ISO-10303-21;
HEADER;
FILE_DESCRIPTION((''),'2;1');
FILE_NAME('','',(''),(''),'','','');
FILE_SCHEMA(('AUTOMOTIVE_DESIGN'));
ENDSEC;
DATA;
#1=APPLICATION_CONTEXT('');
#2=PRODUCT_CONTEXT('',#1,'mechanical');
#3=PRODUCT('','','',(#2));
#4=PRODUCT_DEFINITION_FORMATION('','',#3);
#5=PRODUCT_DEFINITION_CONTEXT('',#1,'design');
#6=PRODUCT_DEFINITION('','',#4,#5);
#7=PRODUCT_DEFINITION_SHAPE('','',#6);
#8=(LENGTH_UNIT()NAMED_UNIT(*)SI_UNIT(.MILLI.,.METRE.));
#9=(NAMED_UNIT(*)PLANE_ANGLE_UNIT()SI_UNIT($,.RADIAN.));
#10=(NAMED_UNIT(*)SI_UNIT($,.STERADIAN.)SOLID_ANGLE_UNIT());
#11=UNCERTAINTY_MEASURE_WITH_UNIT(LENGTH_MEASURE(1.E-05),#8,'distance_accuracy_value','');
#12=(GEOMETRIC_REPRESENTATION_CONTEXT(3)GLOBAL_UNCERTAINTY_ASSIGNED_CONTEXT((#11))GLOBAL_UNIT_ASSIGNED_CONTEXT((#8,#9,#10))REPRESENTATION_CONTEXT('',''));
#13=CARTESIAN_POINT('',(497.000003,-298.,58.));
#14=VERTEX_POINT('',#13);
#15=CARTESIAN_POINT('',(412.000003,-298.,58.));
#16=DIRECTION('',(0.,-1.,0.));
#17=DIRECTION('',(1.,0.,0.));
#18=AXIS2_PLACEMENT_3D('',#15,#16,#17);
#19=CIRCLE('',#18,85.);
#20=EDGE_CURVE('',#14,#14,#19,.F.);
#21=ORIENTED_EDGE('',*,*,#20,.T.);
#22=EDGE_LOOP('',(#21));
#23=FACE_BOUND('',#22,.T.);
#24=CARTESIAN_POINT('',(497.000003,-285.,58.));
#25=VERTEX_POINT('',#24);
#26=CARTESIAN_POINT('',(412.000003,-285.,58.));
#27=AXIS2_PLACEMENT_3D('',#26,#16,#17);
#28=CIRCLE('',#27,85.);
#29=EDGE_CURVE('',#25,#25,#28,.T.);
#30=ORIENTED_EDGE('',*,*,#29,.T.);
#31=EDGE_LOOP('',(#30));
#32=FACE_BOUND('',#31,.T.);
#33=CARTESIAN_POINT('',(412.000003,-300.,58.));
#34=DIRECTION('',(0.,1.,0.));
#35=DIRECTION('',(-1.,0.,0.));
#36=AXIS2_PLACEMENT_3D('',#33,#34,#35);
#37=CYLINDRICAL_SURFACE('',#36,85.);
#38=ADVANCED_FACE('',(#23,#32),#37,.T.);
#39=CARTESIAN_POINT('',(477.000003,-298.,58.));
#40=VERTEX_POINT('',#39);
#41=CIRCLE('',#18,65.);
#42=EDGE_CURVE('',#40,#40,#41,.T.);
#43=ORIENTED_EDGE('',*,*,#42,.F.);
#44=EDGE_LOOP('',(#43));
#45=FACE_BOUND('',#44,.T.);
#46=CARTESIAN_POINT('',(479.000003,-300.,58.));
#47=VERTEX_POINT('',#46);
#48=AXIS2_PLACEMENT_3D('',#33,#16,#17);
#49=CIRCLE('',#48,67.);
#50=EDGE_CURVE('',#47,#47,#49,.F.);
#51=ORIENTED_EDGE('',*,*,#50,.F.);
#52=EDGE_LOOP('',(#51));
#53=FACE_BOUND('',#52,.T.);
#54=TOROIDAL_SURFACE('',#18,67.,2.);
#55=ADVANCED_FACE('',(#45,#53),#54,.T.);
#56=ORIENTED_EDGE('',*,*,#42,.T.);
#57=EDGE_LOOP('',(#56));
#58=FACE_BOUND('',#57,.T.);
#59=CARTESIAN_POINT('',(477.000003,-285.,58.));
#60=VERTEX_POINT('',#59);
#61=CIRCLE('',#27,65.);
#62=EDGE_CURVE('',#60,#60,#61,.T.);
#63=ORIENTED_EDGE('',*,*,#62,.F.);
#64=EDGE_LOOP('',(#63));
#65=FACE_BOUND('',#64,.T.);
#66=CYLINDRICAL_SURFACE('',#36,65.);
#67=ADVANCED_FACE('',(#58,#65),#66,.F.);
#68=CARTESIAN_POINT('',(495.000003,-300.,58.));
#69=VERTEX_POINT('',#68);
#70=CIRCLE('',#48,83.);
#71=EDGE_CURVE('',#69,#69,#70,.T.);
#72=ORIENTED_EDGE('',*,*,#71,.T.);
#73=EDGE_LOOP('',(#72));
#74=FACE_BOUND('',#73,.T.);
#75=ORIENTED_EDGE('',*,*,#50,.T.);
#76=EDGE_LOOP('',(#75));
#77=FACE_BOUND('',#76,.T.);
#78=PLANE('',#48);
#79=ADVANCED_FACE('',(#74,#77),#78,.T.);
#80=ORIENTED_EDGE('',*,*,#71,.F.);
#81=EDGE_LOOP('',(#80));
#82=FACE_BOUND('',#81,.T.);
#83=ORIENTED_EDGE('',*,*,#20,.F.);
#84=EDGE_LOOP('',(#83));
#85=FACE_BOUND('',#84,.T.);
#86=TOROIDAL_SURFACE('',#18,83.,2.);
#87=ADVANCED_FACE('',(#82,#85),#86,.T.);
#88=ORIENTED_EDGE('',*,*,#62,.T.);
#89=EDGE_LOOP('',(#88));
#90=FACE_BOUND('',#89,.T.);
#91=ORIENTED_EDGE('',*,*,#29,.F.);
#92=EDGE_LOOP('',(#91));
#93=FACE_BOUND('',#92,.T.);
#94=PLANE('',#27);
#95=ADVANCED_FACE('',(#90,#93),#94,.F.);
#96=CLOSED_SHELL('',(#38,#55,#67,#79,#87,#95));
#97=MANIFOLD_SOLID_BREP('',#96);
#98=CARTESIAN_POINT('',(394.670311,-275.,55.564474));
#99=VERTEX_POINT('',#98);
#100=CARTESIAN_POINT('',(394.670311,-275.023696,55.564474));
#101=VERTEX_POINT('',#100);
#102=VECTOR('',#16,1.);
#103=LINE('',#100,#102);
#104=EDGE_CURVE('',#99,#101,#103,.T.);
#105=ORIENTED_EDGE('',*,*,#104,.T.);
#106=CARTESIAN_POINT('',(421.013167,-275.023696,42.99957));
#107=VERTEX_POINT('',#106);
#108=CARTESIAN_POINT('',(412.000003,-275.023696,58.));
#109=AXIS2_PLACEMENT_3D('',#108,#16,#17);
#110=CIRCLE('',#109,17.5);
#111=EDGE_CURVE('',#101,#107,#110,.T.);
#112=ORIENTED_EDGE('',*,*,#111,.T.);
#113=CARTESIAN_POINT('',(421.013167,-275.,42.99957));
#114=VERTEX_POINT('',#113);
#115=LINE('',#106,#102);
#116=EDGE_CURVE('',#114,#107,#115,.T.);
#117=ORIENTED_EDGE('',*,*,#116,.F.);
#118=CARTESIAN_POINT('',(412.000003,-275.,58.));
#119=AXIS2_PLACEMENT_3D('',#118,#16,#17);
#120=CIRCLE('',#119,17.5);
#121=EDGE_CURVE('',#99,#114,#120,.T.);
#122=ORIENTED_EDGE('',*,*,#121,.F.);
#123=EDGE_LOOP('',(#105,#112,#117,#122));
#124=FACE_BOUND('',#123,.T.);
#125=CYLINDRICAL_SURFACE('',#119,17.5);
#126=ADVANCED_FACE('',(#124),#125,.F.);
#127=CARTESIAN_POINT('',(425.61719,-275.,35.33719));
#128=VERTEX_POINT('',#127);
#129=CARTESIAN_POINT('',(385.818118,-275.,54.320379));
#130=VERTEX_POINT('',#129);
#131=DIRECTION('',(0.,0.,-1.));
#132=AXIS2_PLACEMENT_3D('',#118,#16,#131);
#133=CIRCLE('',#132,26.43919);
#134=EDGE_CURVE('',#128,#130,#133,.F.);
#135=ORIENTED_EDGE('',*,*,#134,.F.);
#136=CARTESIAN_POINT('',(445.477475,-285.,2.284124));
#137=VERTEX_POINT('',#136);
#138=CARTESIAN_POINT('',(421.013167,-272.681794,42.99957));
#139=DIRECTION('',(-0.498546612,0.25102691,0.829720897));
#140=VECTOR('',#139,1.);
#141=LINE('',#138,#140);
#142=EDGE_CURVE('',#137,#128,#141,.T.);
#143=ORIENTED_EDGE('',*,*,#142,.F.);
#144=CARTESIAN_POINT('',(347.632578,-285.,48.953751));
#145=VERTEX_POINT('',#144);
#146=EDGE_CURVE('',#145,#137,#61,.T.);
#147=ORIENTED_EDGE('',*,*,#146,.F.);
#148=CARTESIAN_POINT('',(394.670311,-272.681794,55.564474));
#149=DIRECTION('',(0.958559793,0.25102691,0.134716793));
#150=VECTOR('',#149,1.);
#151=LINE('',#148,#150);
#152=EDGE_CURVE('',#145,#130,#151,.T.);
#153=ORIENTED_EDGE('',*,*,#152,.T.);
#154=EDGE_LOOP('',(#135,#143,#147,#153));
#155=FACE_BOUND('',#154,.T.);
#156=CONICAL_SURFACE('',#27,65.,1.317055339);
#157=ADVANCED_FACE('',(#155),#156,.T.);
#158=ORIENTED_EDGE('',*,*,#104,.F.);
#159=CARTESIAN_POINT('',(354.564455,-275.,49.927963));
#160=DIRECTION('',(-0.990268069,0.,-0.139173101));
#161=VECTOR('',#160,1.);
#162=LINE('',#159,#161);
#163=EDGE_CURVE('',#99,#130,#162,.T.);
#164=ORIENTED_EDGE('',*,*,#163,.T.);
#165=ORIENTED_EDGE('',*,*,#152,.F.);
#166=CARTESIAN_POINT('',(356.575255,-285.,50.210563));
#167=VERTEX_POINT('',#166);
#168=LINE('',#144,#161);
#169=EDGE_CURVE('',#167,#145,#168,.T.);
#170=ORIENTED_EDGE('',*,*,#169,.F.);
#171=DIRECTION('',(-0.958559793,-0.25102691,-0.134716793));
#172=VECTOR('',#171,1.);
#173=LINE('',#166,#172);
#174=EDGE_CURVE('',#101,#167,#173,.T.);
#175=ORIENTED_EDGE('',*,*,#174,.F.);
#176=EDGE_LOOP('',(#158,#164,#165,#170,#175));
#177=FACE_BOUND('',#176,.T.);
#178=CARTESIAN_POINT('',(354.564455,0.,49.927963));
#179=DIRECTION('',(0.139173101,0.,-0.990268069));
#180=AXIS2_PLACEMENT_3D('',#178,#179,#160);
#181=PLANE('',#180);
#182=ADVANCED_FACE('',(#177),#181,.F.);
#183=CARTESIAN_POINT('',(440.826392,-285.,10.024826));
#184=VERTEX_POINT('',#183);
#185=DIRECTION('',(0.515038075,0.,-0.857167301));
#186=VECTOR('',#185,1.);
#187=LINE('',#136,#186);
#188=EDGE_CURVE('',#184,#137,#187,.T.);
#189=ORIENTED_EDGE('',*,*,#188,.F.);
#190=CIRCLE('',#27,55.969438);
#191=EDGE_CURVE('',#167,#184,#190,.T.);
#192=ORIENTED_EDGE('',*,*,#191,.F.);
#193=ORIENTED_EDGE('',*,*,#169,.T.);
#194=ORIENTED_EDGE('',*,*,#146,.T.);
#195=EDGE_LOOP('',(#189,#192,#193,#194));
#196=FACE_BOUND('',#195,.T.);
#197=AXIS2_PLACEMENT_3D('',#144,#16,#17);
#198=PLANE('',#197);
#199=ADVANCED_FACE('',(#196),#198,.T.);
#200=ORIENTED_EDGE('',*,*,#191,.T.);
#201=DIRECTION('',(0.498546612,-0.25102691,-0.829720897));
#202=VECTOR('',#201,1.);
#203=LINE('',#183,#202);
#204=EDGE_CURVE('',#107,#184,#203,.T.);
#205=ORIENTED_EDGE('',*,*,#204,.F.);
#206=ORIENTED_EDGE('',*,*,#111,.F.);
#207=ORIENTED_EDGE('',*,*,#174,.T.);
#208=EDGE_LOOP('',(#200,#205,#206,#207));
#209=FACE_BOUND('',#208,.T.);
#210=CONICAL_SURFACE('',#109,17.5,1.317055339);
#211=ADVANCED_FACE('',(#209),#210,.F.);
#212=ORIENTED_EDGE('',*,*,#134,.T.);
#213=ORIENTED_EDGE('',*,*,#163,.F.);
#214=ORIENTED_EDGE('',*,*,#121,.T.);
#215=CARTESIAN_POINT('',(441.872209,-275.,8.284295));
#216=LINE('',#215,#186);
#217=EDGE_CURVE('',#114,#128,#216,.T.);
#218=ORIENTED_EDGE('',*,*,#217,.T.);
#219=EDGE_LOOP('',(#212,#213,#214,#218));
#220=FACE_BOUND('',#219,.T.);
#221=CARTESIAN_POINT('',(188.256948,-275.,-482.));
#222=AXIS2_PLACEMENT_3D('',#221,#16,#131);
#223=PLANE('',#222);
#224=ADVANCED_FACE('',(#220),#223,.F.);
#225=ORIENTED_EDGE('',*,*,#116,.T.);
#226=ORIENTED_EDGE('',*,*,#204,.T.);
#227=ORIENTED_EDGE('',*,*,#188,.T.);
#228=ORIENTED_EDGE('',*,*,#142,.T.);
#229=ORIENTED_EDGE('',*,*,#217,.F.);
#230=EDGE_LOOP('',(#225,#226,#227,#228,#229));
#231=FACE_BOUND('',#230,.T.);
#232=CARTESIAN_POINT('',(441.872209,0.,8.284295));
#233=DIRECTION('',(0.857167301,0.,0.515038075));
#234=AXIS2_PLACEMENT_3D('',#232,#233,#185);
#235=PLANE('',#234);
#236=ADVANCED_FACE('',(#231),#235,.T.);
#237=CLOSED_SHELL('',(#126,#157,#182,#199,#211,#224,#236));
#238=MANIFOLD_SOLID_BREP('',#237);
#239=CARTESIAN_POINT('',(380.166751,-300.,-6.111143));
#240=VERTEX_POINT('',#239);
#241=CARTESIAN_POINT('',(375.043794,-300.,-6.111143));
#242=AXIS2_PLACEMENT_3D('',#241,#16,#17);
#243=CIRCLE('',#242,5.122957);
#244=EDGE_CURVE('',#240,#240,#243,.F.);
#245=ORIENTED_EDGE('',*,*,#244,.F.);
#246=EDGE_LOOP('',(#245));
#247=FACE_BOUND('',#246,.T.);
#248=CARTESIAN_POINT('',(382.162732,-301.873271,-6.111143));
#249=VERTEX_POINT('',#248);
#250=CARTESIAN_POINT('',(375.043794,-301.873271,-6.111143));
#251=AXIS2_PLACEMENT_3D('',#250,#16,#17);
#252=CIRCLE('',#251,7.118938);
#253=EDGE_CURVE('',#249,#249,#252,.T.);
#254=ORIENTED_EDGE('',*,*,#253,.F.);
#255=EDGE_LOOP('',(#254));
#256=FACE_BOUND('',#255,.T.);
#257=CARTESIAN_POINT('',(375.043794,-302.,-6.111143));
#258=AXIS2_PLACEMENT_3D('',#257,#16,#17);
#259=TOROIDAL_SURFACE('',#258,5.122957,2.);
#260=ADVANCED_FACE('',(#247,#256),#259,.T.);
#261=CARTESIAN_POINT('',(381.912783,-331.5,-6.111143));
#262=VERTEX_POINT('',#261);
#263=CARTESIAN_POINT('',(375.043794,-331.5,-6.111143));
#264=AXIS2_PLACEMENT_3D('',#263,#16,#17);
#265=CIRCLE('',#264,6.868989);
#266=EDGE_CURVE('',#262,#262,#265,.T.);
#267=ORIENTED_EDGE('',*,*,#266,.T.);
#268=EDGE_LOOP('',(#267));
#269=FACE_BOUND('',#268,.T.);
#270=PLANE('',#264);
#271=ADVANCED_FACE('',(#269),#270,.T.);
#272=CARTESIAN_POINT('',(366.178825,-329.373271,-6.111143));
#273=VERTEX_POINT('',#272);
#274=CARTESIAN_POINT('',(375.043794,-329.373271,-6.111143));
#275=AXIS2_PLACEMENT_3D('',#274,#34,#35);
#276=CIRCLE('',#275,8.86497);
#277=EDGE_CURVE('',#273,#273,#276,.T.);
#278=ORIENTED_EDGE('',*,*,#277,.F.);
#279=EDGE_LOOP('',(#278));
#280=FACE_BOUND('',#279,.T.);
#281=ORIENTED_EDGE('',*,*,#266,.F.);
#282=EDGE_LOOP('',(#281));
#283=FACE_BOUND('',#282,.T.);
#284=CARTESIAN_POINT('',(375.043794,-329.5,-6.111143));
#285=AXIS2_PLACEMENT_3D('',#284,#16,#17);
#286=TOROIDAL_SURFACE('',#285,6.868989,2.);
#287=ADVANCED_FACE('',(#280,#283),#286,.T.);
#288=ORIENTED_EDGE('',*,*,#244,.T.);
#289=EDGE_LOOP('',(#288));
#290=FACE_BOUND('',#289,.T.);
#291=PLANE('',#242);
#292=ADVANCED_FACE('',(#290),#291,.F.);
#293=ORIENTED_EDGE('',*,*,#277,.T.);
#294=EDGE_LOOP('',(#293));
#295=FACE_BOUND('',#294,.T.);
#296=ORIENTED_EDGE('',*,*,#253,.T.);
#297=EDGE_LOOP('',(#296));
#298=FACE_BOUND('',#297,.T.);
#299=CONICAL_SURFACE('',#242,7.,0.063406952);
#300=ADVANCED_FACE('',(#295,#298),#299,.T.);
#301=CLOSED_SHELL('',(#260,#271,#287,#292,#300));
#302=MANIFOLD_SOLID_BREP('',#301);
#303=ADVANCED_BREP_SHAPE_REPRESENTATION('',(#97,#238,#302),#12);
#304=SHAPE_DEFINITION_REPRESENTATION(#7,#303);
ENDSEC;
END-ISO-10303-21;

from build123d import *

# Parameters (mm, degrees)
SKETCH1_W                 = 960
SKETCH1_H                 = 450
BOSS_EXTRUDE1_DEPTH       = 118
BOSS_EXTRUDE10_DEPTH      = 10
BOSS_EXTRUDE15_DEPTH      = 30
SWEEP1_PROFILE_R          = 5
SKETCH39_R                = 10
BOSS_EXTRUDE17_DEPTH      = 30
BOSS_EXTRUDE17_DRAFT      = -6
SKETCH290_R               = 48
BOSS_EXTRUDE33_DEPTH      = 10
SKETCH291_R               = 25
CUT_EXTRUDE18_START       = -255
CUT_EXTRUDE18_OUTLINE_R   = 21.000000142
CUT_EXTRUDE18_DEPTH       = 20
BOSS_EXTRUDE34_START      = 10
SKETCH294_R               = 24.999996895
SKETCH294_R_2             = 21.000000142
BOSS_EXTRUDE34_DEPTH      = 10
SKETCH295_R               = 17.5
BOSS_EXTRUDE35_DEPTH      = 40
SKETCH298_R               = 85
SKETCH298_R_2             = 65
BOSS_EXTRUDE36_DEPTH      = 15
REVOLVE2_ANGLE            = 82
REVOLVE2_OTHER_WAY_ANGLE  = 31
SKETCH301_R               = 7
SKETCH302_R               = 9
SKETCH348_R               = 7.85
BOSS_EXTRUDE39_DEPTH      = 25.7
SKETCH349_R               = 25
BOSS_EXTRUDE40_DEPTH      = 20
SKETCH351_R               = 7.85
BOSS_EXTRUDE41_DEPTH      = 25.7
SKETCH353_R               = 25
BOSS_EXTRUDE42_DEPTH      = 20
SKETCH359_W               = 176
SKETCH359_H               = 100
BOSS_EXTRUDE44_DEPTH      = 3
SKETCH360_R               = 15
SKETCH360_R_2             = 20
BOSS_EXTRUDE46_DEPTH      = 8
SKETCH361_R               = 20
BOSS_EXTRUDE47_DEPTH      = 8
SKETCH368_W               = 153
SKETCH368_H               = 100
BOSS_EXTRUDE48_DEPTH      = 3
SKETCH409_W               = 87.321701038
SKETCH409_H               = 70.377876338
CUT_EXTRUDE21_DEPTH       = 202
BOSS_EXTRUDE51_DEPTH      = 8.5
SKETCH417_W               = 25
SKETCH417_H               = 43
BOSS_EXTRUDE52_DEPTH      = 21.3
SKETCH418_W               = 31.239129338
SKETCH418_H               = 19
BOSS_EXTRUDE53_DEPTH      = 7.5
SWEEP4_PROFILE_R          = 5
BOSS_EXTRUDE54_DEPTH      = 450
BOSS_EXTRUDE55_DEPTH      = 450
BOSS_EXTRUDE55_2_DEPTH    = 450
BOSS_EXTRUDE56_DEPTH      = 8
BOSS_EXTRUDE57_DEPTH      = 12
BOSS_EXTRUDE58_DEPTH      = 40
BOSS_EXTRUDE58_DEPTH_BACK = 40
SKETCH523_W               = 30
SKETCH523_H               = 450
SKETCH528_R               = 8
CUT_EXTRUDE23_DEPTH       = 505
CUT_EXTRUDE24_DEPTH       = 31
SKETCH531_R               = 12.5
CUT_EXTRUDE25_DEPTH       = 91
SKETCH532_R               = 9
BOSS_EXTRUDE59_DEPTH      = 11
BOSS_EXTRUDE59_TAPER      = 13
SWEEP5_PROFILE_R          = 3
SKETCH548_R               = 3.822526848
BOSS_EXTRUDE60_DEPTH      = 11
BOSS_EXTRUDE60_DRAFT      = -4
BOSS_EXTRUDE61_DEPTH      = 450
BOSS_EXTRUDE62_DEPTH      = 20
SKETCH574_W               = 6
SKETCH574_H               = 6.933046309
BOSS_EXTRUDE63_DEPTH      = 20
CUT_EXTRUDE26_DEPTH       = 10
SKETCH576_R               = 3.3489074
CUT_EXTRUDE27_DEPTH       = 5
CUT_EXTRUDE28_DEPTH       = 2
BOSS_EXTRUDE64_DEPTH      = 40
BOSS_EXTRUDE64_DEPTH_BACK = 50
SKETCH578_W               = 30
SKETCH578_H               = 450
SKETCH579_R               = 8
CUT_EXTRUDE29_DEPTH       = 458
SKETCH580_R               = 9
BOSS_EXTRUDE65_DEPTH      = 12
BOSS_EXTRUDE65_TAPER      = 9
SWEEP6_PROFILE_R          = 3
SKETCH624_R               = 4
BOSS_EXTRUDE66_DEPTH      = 12
BOSS_EXTRUDE66_DRAFT      = -6
BOSS_EXTRUDE67_DEPTH      = 35
BOSS_EXTRUDE68_DEPTH      = 35
CUT_EXTRUDE31_DEPTH       = 43
CUT_EXTRUDE32_DEPTH       = 600
FILLET1_R                 = 2
FILLET2_R                 = 2


# Read off the part's stored shape, not the designer's step: Boss-Extrude15, Cut-Extrude18
with BuildPart() as part:
    # Sketch1 → Boss-Extrude1 (new body)
    with BuildSketch(Plane.XY):
        Rectangle(SKETCH1_W, SKETCH1_H)
    extrude(amount=BOSS_EXTRUDE1_DEPTH)

    # Sketch27 → Boss-Extrude10 (add)
    with BuildSketch(Plane.XZ.offset(225)):
        with BuildLine():
            Line((-358.776190415, 0), (-290.379824208, 0))
            ThreePointArc((-290.379824208, 0), (-324.578007312, 52.886171467), (-358.776190415, 0))
        make_face()
    extrude(amount=BOSS_EXTRUDE10_DEPTH)

    # Sketch290 → Boss-Extrude33 (add)
    with BuildSketch(Plane.XZ.offset(225)):
        with Locations(Location((412, 58, 0), (0, 0, 90))):
            Circle(SKETCH290_R)
    extrude(amount=BOSS_EXTRUDE33_DEPTH)

    # Sketch291 → section 1 of loft2
    with BuildSketch(Plane(origin=(0, -255, 0), x_dir=(-1, 0, 0), z_dir=(0, -1, 0)), mode=Mode.PRIVATE) as loft2_s1:
        with Locations((-412, -58)):
            Circle(SKETCH291_R)
    # loft from a face of the part (loft2)
    loft([part.faces().sort_by_distance((412, -235, 58))[0], loft2_s1.sketch])

    # Cut-Extrude18 outline → Cut-Extrude18 (cut)
    with BuildSketch(Plane(origin=(0, 0, 0), x_dir=(1, 0, 0), z_dir=(0, 1, 0)).offset(CUT_EXTRUDE18_START)):
        with Locations((412.000003105, -57.99999986)):
            Circle(CUT_EXTRUDE18_OUTLINE_R)
    extrude(amount=CUT_EXTRUDE18_DEPTH, mode=Mode.SUBTRACT)

    # Sketch294 → Boss-Extrude34 (add)
    with BuildSketch(Plane.XZ.offset(255).offset(BOSS_EXTRUDE34_START)):
        with Locations(Location((412.000003105, 57.99999986, 0), (0, 0, 90.000007115))):
            Circle(SKETCH294_R)
        with Locations(Location((412.000003105, 57.99999986, 0), (0, 0, 270))):
            Circle(SKETCH294_R_2, mode=Mode.SUBTRACT)
    extrude(amount=-BOSS_EXTRUDE34_DEPTH)

    # Sketch295 → Boss-Extrude35 (add)
    with BuildSketch(Plane.XZ.offset(235)):
        with Locations(Location((412.000003105, 57.99999986, 0), (0, 0, 90))):
            Circle(SKETCH295_R)
    extrude(amount=BOSS_EXTRUDE35_DEPTH)

    # Sketch299 → Revolve2 (revolve)
    with BuildSketch(Plane(origin=(412, 0, 0), x_dir=(0, 0, -1), z_dir=(1, 0, 0))):
        Polygon((-2.030561419, -285), (-40.49999986, -275.023695571), (-40.49999986, -272.681794182), (7.00000014, -285), align=None)
    revolve(axis=Axis((412.000003105, -275, 57.99999986), (0, 1, 0)), revolution_arc=REVOLVE2_ANGLE)

    # Sketch299 → Revolve2 other way (revolve)
    with BuildSketch(Plane(origin=(412, 0, 0), x_dir=(0, 0, -1), z_dir=(1, 0, 0))):
        Polygon((-2.030561419, -285), (-40.49999986, -275.023695571), (-40.49999986, -272.681794182), (7.00000014, -285), align=None)
    revolve(axis=Axis((412.000003105, -275, 57.99999986), (0, -1, 0)), revolution_arc=REVOLVE2_OTHER_WAY_ANGLE)

    # Sketch348 → Boss-Extrude39 (add)
    with BuildSketch(Plane.XZ.offset(225)):
        with Locations(Location((260, 93, 0), (0, 0, 90))):
            Circle(SKETCH348_R)
    extrude(amount=BOSS_EXTRUDE39_DEPTH)

    # Sketch349 → Boss-Extrude40 (add)
    with BuildSketch(Plane.XZ.offset(250.7)):
        with Locations(Location((260, 93, 0), (0, 0, 270))):
            Circle(SKETCH349_R)
    extrude(amount=BOSS_EXTRUDE40_DEPTH)

    # Sketch351 → Boss-Extrude41 (add)
    with BuildSketch(Plane(origin=(-410.149510752, -225, -12.966274107), x_dir=(1, 0, 0), z_dir=(0, -1, 0))):
        with Locations(Location((201.149510752, 105.966274107, 0), (0, 0, 90))):
            Circle(SKETCH351_R)
    extrude(amount=BOSS_EXTRUDE41_DEPTH)

    # Sketch353 → Boss-Extrude42 (add)
    with BuildSketch(Plane(origin=(-410.149510752, -250.7, -12.966274107), x_dir=(1, 0, 0), z_dir=(0, -1, 0))):
        with Locations(Location((201.149510752, 105.966274107, 0), (0, 0, 270))):
            Circle(SKETCH353_R)
    extrude(amount=BOSS_EXTRUDE42_DEPTH)

    # Sketch359 → Boss-Extrude44 (add)
    with BuildSketch(Plane.XZ.offset(225)):
        with Locations((157, 50)):
            Rectangle(SKETCH359_W, SKETCH359_H)
    extrude(amount=BOSS_EXTRUDE44_DEPTH)

    # Sketch360 → Boss-Extrude46 (add)
    with BuildSketch(Plane.XZ.offset(228)):
        with Locations(Location((200, 45, 0), (0, 0, 90))):
            Circle(SKETCH360_R)
        with Locations(Location((157, 45, 0), (0, 0, 90))):
            Circle(SKETCH360_R)
        with Locations(Location((112, 45, 0), (0, 0, 90))):
            Circle(SKETCH360_R_2)
    extrude(amount=BOSS_EXTRUDE46_DEPTH)

    # Sketch361 → Boss-Extrude47 (add)
    with BuildSketch(Plane.XZ.offset(236)):
        with Locations(Location((112, 45, 0), (0, 0, 90))):
            Circle(SKETCH361_R)
    extrude(amount=BOSS_EXTRUDE47_DEPTH)

    # Sketch368 → Boss-Extrude48 (add)
    with BuildSketch(Plane.XZ.offset(225)):
        with Locations((-22.5, 50)):
            Rectangle(SKETCH368_W, SKETCH368_H)
    extrude(amount=BOSS_EXTRUDE48_DEPTH)


with BuildPart() as body_2:
    # Boss-Extrude15 outline → Boss-Extrude15 (new body)
    with BuildSketch(Plane.XZ.offset(235)):
        with BuildLine():
            Line((-339.578007312, 0), (-309.578007312, 0))
            Line((-309.578007312, 0), (-309.578007312, 49.755489179))
            ThreePointArc((-309.578007312, 49.755489179), (-324.578007312, 52.886171467), (-339.578007312, 49.755489179))
            Line((-339.578007312, 49.755489179), (-339.578007312, 0))
        make_face()
    extrude(amount=BOSS_EXTRUDE15_DEPTH)


with BuildPart() as body_3:
    # Sweep1: sweep along a path in Sketch30
    with BuildLine(Plane(origin=(-324.578007312, 0, 0), x_dir=(0, 0, -1), z_dir=(1, 0, 0))) as sweep1_path:
        Line((-70.098528038, -245), (-166.691110666, -270.88190451))
    # Sweep1 profile (on start of the path) → Sweep1 (sweep)
    with BuildSketch(Plane(origin=(-324.578007312, -245, 70.098528038), x_dir=(0, 0.9659258262890672, 0.25881904510252496), z_dir=(0, -0.25881904510252496, 0.9659258262890672))):
        Circle(SWEEP1_PROFILE_R)
    sweep(path=sweep1_path.line)


with BuildPart() as body_4:
    # Sketch39 → Boss-Extrude17 (with draft: the straight prism first)
    with BuildSketch(Plane(origin=(0, -59.818424556, 223.245399672), x_dir=(1, 0, 0), z_dir=(0, -0.25881904510252496, 0.9659258262890672))):
        with Locations((-324.578007312, -218.508993351)):
            Circle(SKETCH39_R)
    extrude(amount=-BOSS_EXTRUDE17_DEPTH)
    # Boss-Extrude17: the draft: its side faces are tilted about the plane it starts from
    boss_extrude17_sides = [body_4.faces().sort_by_distance(p)[0] for p in [
        (-334.578007312, -266.999618834, 152.202223272),
    ]]
    draft(boss_extrude17_sides, Plane(origin=(0, -59.818424556, 223.245399672), x_dir=(1, 0, 0), z_dir=(0, -0.25881904510252496, 0.9659258262890672)), BOSS_EXTRUDE17_DRAFT)


with BuildPart() as body_5:
    # Sketch298 → Boss-Extrude36 (new body)
    with BuildSketch(Plane(origin=(0, -285, 0), x_dir=(-1, 0, 0), z_dir=(0, -1, 0))):
        with Locations(Location((-412.000003105, -57.99999986, 0), (0, 0, 180))):
            Circle(SKETCH298_R)
        with Locations(Location((-412.000003105, -57.99999986, 0), (0, 0, 180))):
            Circle(SKETCH298_R_2, mode=Mode.SUBTRACT)
    extrude(amount=BOSS_EXTRUDE36_DEPTH)

    # Fillet2
    fillet2_edges = [body_5.edges().sort_by_distance(p)[0] for p in [
        (327.000003105, -300, 57.99999986),
        (347.000003105, -300, 57.99999986),
    ]]
    fillet(fillet2_edges, radius=FILLET2_R)


with BuildPart() as body_6:
    # Sketch301 → Loft3 section 0
    with BuildSketch(Plane.XZ.offset(300)):
        with Locations((375.04379433, -6.111142955)):
            Circle(SKETCH301_R)
    # Sketch302 → Loft3 section 1
    with BuildSketch(Plane(origin=(0, -331.5, 0), x_dir=(-1, 0, 0), z_dir=(0, -1, 0))):
        with Locations((-375.04379433, 6.111142955)):
            Circle(SKETCH302_R)
    loft()

    # Fillet1
    fillet1_edges = [body_6.edges().sort_by_distance(p)[0] for p in [
        (366.04379433, -331.5, -6.111142955),
        (368.04379433, -300, -6.111142955),
    ]]
    fillet(fillet1_edges, radius=FILLET1_R)


with BuildPart() as cut_extrude21_tool:
    # Sketch409 → Cut-Extrude21 (new body)
    with BuildSketch(Plane(origin=(0, 0, 0), x_dir=(-1, 0, 0), z_dir=(0, 0, -1))):
        with Locations((319.57579901, -260.188938169)):
            Rectangle(SKETCH409_W, SKETCH409_H)
    extrude(amount=-CUT_EXTRUDE21_DEPTH)


with BuildPart() as part_1:
    add(part.part)

    # Cut-Extrude21: cut by cut_extrude21_tool
    add(cut_extrude21_tool.part, mode=Mode.SUBTRACT)

    # Sketch416 → Boss-Extrude51 (add)
    with BuildSketch(Plane.XZ.offset(225)):
        with BuildLine():
            Line((-187.333898684, 0), (-120.666101316, 0))
            ThreePointArc((-120.666101316, 0), (-154, 54.678509787), (-187.333898684, 0))
        make_face()
    extrude(amount=BOSS_EXTRUDE51_DEPTH)

    # Sketch417 → Boss-Extrude52 (add)
    with BuildSketch(Plane(origin=(0, -233.5, 0), x_dir=(-1, 0, 0), z_dir=(0, -1, 0))):
        with Locations((154, -23.5)):
            Rectangle(SKETCH417_W, SKETCH417_H)
    extrude(amount=BOSS_EXTRUDE52_DEPTH)

    # Sketch418 → Boss-Extrude53 (add)
    with BuildSketch(Plane(origin=(-141.5, 0, 0), x_dir=(0, 0, -1), z_dir=(1, 0, 0))):
        with Locations((-19.120957381, -243)):
            Rectangle(SKETCH418_W, SKETCH418_H)
    boss_extrude53 = extrude(amount=BOSS_EXTRUDE53_DEPTH)

    # Mirror11: Boss-Extrude53 across plane
    add(boss_extrude53.mirror(Plane(origin=(-154, 0, 0), x_dir=(0, 0, 1), z_dir=(1, 0, 0))))

    # Sweep4: sweep along a path in Sketch419
    with BuildLine(Plane(origin=(-154, 0, 0), x_dir=(0, 0, -1), z_dir=(1, 0, 0))) as sweep4_path:
        Line((-40.004640895, -239.861739097), (-94.16906731, -249.412388869))
    # Sweep4 profile (on start of the path) → Sweep4 (sweep)
    with BuildSketch(Plane(origin=(-154, -239.861739097, 40.004640895), x_dir=(0, 0.9848077530122079, 0.17364817766693108), z_dir=(0, -0.17364817766693108, 0.9848077530122079))):
        Circle(SWEEP4_PROFILE_R)
    sweep(path=sweep4_path.line)


with BuildPart() as body_2_1:
    add(body_2.part)

    # Cut-Extrude21: cut by cut_extrude21_tool
    add(cut_extrude21_tool.part, mode=Mode.SUBTRACT)


with BuildPart() as body_3_1:
    add(body_3.part)

    # Cut-Extrude21: cut by cut_extrude21_tool
    add(cut_extrude21_tool.part, mode=Mode.SUBTRACT)


with BuildPart() as body_4_1:
    add(body_4.part)

    # Cut-Extrude21: cut by cut_extrude21_tool
    add(cut_extrude21_tool.part, mode=Mode.SUBTRACT)


with BuildPart() as body_4_2:
    # Sketch46 → Boss-Extrude54 (new body)
    with BuildSketch(Plane(origin=(0, 225, 0), x_dir=(1, 0, 0), z_dir=(0, 1, 0))):
        Polygon((-309, 134), (-309, 20), (309, 20), (309, 134), (259, 134), (259, 104), (174, 104), (174, 58), (54, 58), (54, 104), (-54, 104), (-54, 88), (-174, 88), (-174, 104), (-259, 104), (-259, 134), align=None)
    extrude(amount=-BOSS_EXTRUDE54_DEPTH)

    # Sketch530 → Cut-Extrude24 (cut)
    with BuildSketch(Plane(origin=(309, 0, 0), x_dir=(0, 0, -1), z_dir=(1, 0, 0))):
        with BuildLine():
            Line((111, -30), (111, 30))
            ThreePointArc((111, 30), (113.928932188, 37.071067812), (121, 40))
            Line((121, 40), (134, 40))
            Line((134, 40), (134, -40))
            Line((134, -40), (121, -40))
            ThreePointArc((121, -40), (113.928932188, -37.071067812), (111, -30))
        make_face()
    cut_extrude24 = extrude(amount=-CUT_EXTRUDE24_DEPTH, mode=Mode.SUBTRACT)

    # Sketch531 → Cut-Extrude25 (cut)
    with BuildSketch(Plane(origin=(309, 0, 0), x_dir=(0, 0, -1), z_dir=(1, 0, 0))):
        with Locations((61, 0)):
            Circle(SKETCH531_R)
    cut_extrude25 = extrude(amount=-CUT_EXTRUDE25_DEPTH, mode=Mode.SUBTRACT)


with BuildPart() as body_5_2:
    # Sketch507 → Boss-Extrude55 (new body)
    with BuildSketch(Plane.XZ.offset(225)):
        Polygon((245.334467639, 0), (245.334467639, -12), (255.334467639, -12), (255.334467639, -20), (309, -20), (309, -11.290670978), (270.334467639, -4.4728944), (260.334467639, -4.4728944), (260.334467639, 0), align=None)
    extrude(amount=-BOSS_EXTRUDE55_DEPTH)


with BuildPart() as body_6_2:
    # Sketch507 → Boss-Extrude55 2 (new body)
    with BuildSketch(Plane.XZ.offset(225)):
        Polygon((-260.334467639, -4.4728944), (-260.334467639, 0), (-245.334467639, 0), (-245.334467639, -12), (-255.334467639, -12), (-255.334467639, -20), (-309, -20), (-309, -11.290670978), (-270.334467639, -4.4728944), align=None)
    extrude(amount=-BOSS_EXTRUDE55_2_DEPTH)


with BuildPart() as body_7:
    # Sketch508 → Boss-Extrude56 (new body)
    with BuildSketch(Plane.XY.offset(-20)):
        with BuildLine():
            Line((203.822710766, -65.327620509), (203.822710766, 225))
            Line((203.822710766, 225), (-203.822710766, 225))
            Line((-203.822710766, 225), (-203.822710766, -65.327620509))
            ThreePointArc((-203.822710766, -65.327620509), (0, -269.150331275), (203.822710766, -65.327620509))
        make_face()
    extrude(amount=BOSS_EXTRUDE56_DEPTH)


with BuildPart() as body_8:
    # Sketch509 → Boss-Extrude57 (new body)
    with BuildSketch(Plane.XY.offset(-12)):
        with BuildLine():
            Line((-223.822710766, 225), (-223.822710766, -65.327620509))
            ThreePointArc((-223.822710766, -65.327620509), (0, -289.150331275), (223.822710766, -65.327620509))
            Line((223.822710766, -65.327620509), (223.822710766, 225))
            Line((223.822710766, 225), (-223.822710766, 225))
        make_face()
    extrude(amount=BOSS_EXTRUDE57_DEPTH)


with BuildPart() as body_9:
    # Sketch523 → Boss-Extrude58 (new, two sides: drawn at the far end of the back side and taken through both)
    with BuildSketch(Plane.ZY.offset(-259).offset(-BOSS_EXTRUDE58_DEPTH_BACK)):
        with Locations((-149, 0)):
            Rectangle(SKETCH523_W, SKETCH523_H)
    extrude(amount=BOSS_EXTRUDE58_DEPTH + BOSS_EXTRUDE58_DEPTH_BACK)

    # Sketch528 → Cut-Extrude23 (cut)
    with BuildSketch(Plane.XZ.offset(225)):
        with Locations(Location((234, -150, 0), (0, 0, 270))):
            Circle(SKETCH528_R)
    extrude(amount=-CUT_EXTRUDE23_DEPTH, mode=Mode.SUBTRACT)


    add(body_4_2.part)  # Boss-Extrude59 merges body 4 2
    # Sketch532 → Boss-Extrude59 (add)
    with BuildSketch(Plane.XY.offset(-134)):
        with Locations((305.731066291, 0)):
            Circle(SKETCH532_R)
    extrude(amount=BOSS_EXTRUDE59_DEPTH, taper=BOSS_EXTRUDE59_TAPER)

    # Sweep5: sweep along a path in Sketch533
    with BuildLine(Plane(origin=(0, 0, 0), x_dir=(1, 0, 0), z_dir=(0, 1, 0))) as sweep5_path:
        Line((308.709235397, 126.778230421), (343.709235397, 126.778230421))
    # Sweep5 profile (on start of the path) → Sweep5 (sweep)
    with BuildSketch(Plane(origin=(308.709235397, 0, -126.778230421), x_dir=(0, 0, 1), z_dir=(1, 0, 0))):
        Circle(SWEEP5_PROFILE_R)
    sweep(path=sweep5_path.line)


with BuildPart() as boss_extrude60_tool:
    # Sketch548 → Boss-Extrude60 (with draft: the straight prism first)
    with BuildSketch(Plane(origin=(343.709235397, 0, 0), x_dir=(0, 0, -1), z_dir=(1, 0, 0))):
        with Locations((126.778230421, 0)):
            Circle(SKETCH548_R)
    extrude(amount=BOSS_EXTRUDE60_DEPTH)
    # Boss-Extrude60: the draft: its side faces are tilted about the plane it starts from
    boss_extrude60_sides = [boss_extrude60_tool.faces().sort_by_distance(p)[0] for p in [
        (349.209235397, 0, -122.955703572),
    ]]
    draft(boss_extrude60_sides, Plane(origin=(343.709235397, 0, 0), x_dir=(0, 0, -1), z_dir=(1, 0, 0)), BOSS_EXTRUDE60_DRAFT)


with BuildPart() as body_9_1:
    add(body_9.part)

    # Boss-Extrude60: add boss_extrude60_tool
    add(boss_extrude60_tool.part)



with BuildPart() as body_9_2:
    # Sketch569 → Boss-Extrude61 (new body)
    with BuildSketch(Plane.XZ.offset(225)):
        Polygon((299, -134), (299, -164), (309, -164), (309, -154), (305, -154), (305, -144), (309, -144), (309, -134), align=None)
    extrude(amount=-BOSS_EXTRUDE61_DEPTH)


with BuildPart() as body_9_3:
    add(body_9_1.part)

    add(body_9_2.part)  # Boss-Extrude62 merges body 9 2
    # Sketch573 → Boss-Extrude62 (add)
    with BuildSketch(Plane(origin=(0, -195, 0), x_dir=(-1, 0, 0), z_dir=(0, -1, 0))):
        with BuildLine():
            Line((-305, 154), (-305, 144))
            Line((-305, 144), (-310, 144))
            Line((-310, 144), (-310, 139))
            Line((-310, 139), (-320, 139))
            Line((-320, 139), (-320, 189))
            Line((-320, 189), (-314, 189))
            Line((-314, 189), (-314, 177.959605655))
            add(Edge.make_bspline(
                [(-314, 177.959605655), (-313.095582929, 173.000040249), (-310, 170.724904616)],
                knots=[0, 0, 0, 0.563388654, 0.563388654, 0.563388654], degree=2))
            Line((-310, 170.724904616), (-310, 154))
            Line((-310, 154), (-305, 154))
        make_face()
    boss_extrude62 = extrude(amount=-BOSS_EXTRUDE62_DEPTH)

    # Sketch574 → Boss-Extrude63 (add)
    with BuildSketch(Plane(origin=(0, -175, 0), x_dir=(1, 0, 0), z_dir=(0, 1, 0))):
        with Locations((317, 185.533476845)):
            Rectangle(SKETCH574_W, SKETCH574_H)
    boss_extrude63 = extrude(amount=BOSS_EXTRUDE63_DEPTH)

    # Sketch575 → Cut-Extrude26 (cut)
    with BuildSketch(Plane(origin=(320, 0, 0), x_dir=(0, 0, -1), z_dir=(1, 0, 0))):
        with BuildLine():
            Line((175.976347761, -190.268278203), (154.440154303, -190.268278203))
            ThreePointArc((154.440154303, -190.268278203), (149.459921424, -185.288045325), (154.440154303, -180.307812446))
            Line((154.440154303, -180.307812446), (175.976347761, -180.307812446))
            ThreePointArc((175.976347761, -180.307812446), (180.95658064, -185.288045325), (175.976347761, -190.268278203))
        make_face()
    cut_extrude26 = extrude(amount=-CUT_EXTRUDE26_DEPTH, mode=Mode.SUBTRACT)

    # Sketch576 → Cut-Extrude27 (cut)
    with BuildSketch(Plane(origin=(320, 0, 0), x_dir=(0, 0, -1), z_dir=(1, 0, 0))):
        with Locations(Location((144.110553228, -185, 0), (0, 0, 90))):
            Circle(SKETCH576_R)
    cut_extrude27 = extrude(amount=-CUT_EXTRUDE27_DEPTH, mode=Mode.SUBTRACT)

    # Sketch577 → Cut-Extrude28 (cut)
    with BuildSketch(Plane(origin=(320, 0, 0), x_dir=(0, 0, -1), z_dir=(1, 0, 0))):
        with BuildLine():
            Line((183.830404245, -189.715609951), (183.830404245, -158.966099244))
            ThreePointArc((183.830404245, -158.966099244), (185.689373715, -157.107129773), (187.548343186, -158.966099244))
            Line((187.548343186, -158.966099244), (187.548343186, -189.715609951))
            ThreePointArc((187.548343186, -189.715609951), (185.689373715, -191.574579422), (183.830404245, -189.715609951))
        make_face()
    cut_extrude28 = extrude(amount=-CUT_EXTRUDE28_DEPTH, mode=Mode.SUBTRACT)

    # Mirror14: Boss-Extrude62, Boss-Extrude63, Cut-Extrude26, Cut-Extrude27, Cut-Extrude28 across plane
    add(boss_extrude62.mirror(Plane.ZX))
    add(boss_extrude63.mirror(Plane.ZX))
    add(cut_extrude26.mirror(Plane.ZX), mode=Mode.SUBTRACT)
    add(cut_extrude27.mirror(Plane.ZX), mode=Mode.SUBTRACT)
    add(cut_extrude28.mirror(Plane.ZX), mode=Mode.SUBTRACT)

    # Mirror22: Cut-Extrude24, Cut-Extrude25 across plane
    add(cut_extrude24.mirror(Plane(origin=(0, 0, 0), x_dir=(0, 0, 1), z_dir=(1, 0, 0))), mode=Mode.SUBTRACT)
    add(cut_extrude25.mirror(Plane(origin=(0, 0, 0), x_dir=(0, 0, 1), z_dir=(1, 0, 0))), mode=Mode.SUBTRACT)



with BuildPart() as body_9_3_1:
    # Sketch578 → Boss-Extrude64 (new, two sides: drawn at the far end of the back side and taken through both)
    with BuildSketch(Plane(origin=(-259, 0, 0), x_dir=(0, 0, -1), z_dir=(1, 0, 0)).offset(-BOSS_EXTRUDE64_DEPTH_BACK)):
        with Locations((149, 0)):
            Rectangle(SKETCH578_W, SKETCH578_H)
    extrude(amount=BOSS_EXTRUDE64_DEPTH + BOSS_EXTRUDE64_DEPTH_BACK)

    # Sketch579 → Cut-Extrude29 (cut)
    with BuildSketch(Plane.XZ.offset(225)):
        with Locations(Location((-233, -150, 0), (0, 0, 270))):
            Circle(SKETCH579_R)
    extrude(amount=-CUT_EXTRUDE29_DEPTH, mode=Mode.SUBTRACT)


with BuildPart() as body_9_4:
    add(body_9_3.part)

    add(body_9_3_1.part)  # Boss-Extrude65 merges body 9 3
    # Sketch580 → Boss-Extrude65 (add)
    with BuildSketch(Plane.XY.offset(-134)):
        with Locations((-293, 0)):
            Circle(SKETCH580_R)
    extrude(amount=BOSS_EXTRUDE65_DEPTH, taper=BOSS_EXTRUDE65_TAPER)

    # Sketch627 → Boss-Extrude67 (add)
    with BuildSketch(Plane.XZ.offset(-40)):
        Polygon((-309, -147.723102329), (-309, -186), (-344, -186), (-344, -218.886191283), (-347, -218.886191283), (-347, -183), (-312, -183), (-312, -147.723102329), align=None)
    extrude(amount=-BOSS_EXTRUDE67_DEPTH)


with BuildPart() as body_9_4_1:
    # Sweep6: sweep along a path in Sketch581
    with BuildLine(Plane(origin=(0, 0, 0), x_dir=(-1, 0, 0), z_dir=(0, -1, 0))) as sweep6_path:
        Line((304.412677424, 128.691302195), (339.34302055, 126.484238737))
    # Sweep6 profile (on start of the path) → Sweep6 (sweep)
    with BuildSketch(Plane(origin=(-304.412677424, 0, -128.691302195), x_dir=(-0.06305895592875901, 0, -0.9980098035977276), z_dir=(-0.9980098035977276, 0, 0.06305895592875901))):
        Circle(SWEEP6_PROFILE_R)
    sweep(path=sweep6_path.line)


with BuildPart() as body_10:
    # Sketch624 → Boss-Extrude66 (with draft: the straight prism first)
    with BuildSketch(Plane(origin=(-330.033555829, 0, 20.853073163), x_dir=(0.06305895592875906, 0, 0.9980098035977277), z_dir=(-0.9980098035977277, 0, 0.06305895592875906))):
        with Locations((-147.631126838, 0)):
            Circle(SKETCH624_R)
    extrude(amount=BOSS_EXTRUDE66_DEPTH)
    # Boss-Extrude66: the draft: its side faces are tilted about the plane it starts from
    boss_extrude66_sides = [body_10.faces().sort_by_distance(p)[0] for p in [
        (-345.583315195, 0, -130.097924216),
    ]]
    draft(boss_extrude66_sides, Plane(origin=(-330.033555829, 0, 20.853073163), x_dir=(0.06305895592875906, 0, 0.9980098035977277), z_dir=(-0.9980098035977277, 0, 0.06305895592875906)), BOSS_EXTRUDE66_DRAFT)


with BuildPart() as body_11:
    # Sketch630 → Boss-Extrude68 (new body)
    with BuildSketch(Plane(origin=(0, 40, 0), x_dir=(-1, 0, 0), z_dir=(0, -1, 0))):
        Polygon((344, 200.467021809), (344, 236.238077684), (292.204421203, 236.238077684), (292.204421203, 233.552235769), (341.841610243, 233.552235769), (341.841610243, 200.467021809), align=None)
    extrude(amount=-BOSS_EXTRUDE68_DEPTH)

    # Sketch633 → Cut-Extrude31 (cut)
    with BuildSketch(Plane.XY.offset(-233.552235769)):
        with BuildLine():
            Line((-305.65, 47.970004875), (-317.75, 47.970004875))
            ThreePointArc((-317.75, 47.970004875), (-320.70603272, 45.013972155), (-317.75, 42.057939435))
            Line((-317.75, 42.057939435), (-305.65, 42.057939435))
            ThreePointArc((-305.65, 42.057939435), (-302.69396728, 45.013972155), (-305.65, 47.970004875))
        make_face()
        with BuildLine():
            Line((-305.65, 64.970004875), (-317.75, 64.970004875))
            ThreePointArc((-317.75, 64.970004875), (-320.70603272, 62.013972155), (-317.75, 59.057939435))
            Line((-317.75, 59.057939435), (-305.65, 59.057939435))
            ThreePointArc((-305.65, 59.057939435), (-302.69396728, 62.013972155), (-305.65, 64.970004875))
        make_face()
    extrude(amount=-CUT_EXTRUDE31_DEPTH, mode=Mode.SUBTRACT)


with BuildPart() as cut_extrude32_tool:
    # Sketch634 → Cut-Extrude32 (new body)
    with BuildSketch(Plane.XY.offset(118)):
        Polygon((-601.593069751, 454.142063996), (593.628576086, 454.142063996), (593.628576086, -275), (188.256947974, -275), (188.256947974, -505.78128578), (-601.593069751, -505.78128578), (-601.593069751, -275), align=None)
    extrude(amount=-CUT_EXTRUDE32_DEPTH)


with BuildPart() as part_2:
    add(part_1.part)

    # Cut-Extrude32: cut by cut_extrude32_tool
    add(cut_extrude32_tool.part, mode=Mode.SUBTRACT)


with BuildPart() as body_5_2_1:
    add(body_5_2.part)

    # Cut-Extrude32: cut by cut_extrude32_tool
    add(cut_extrude32_tool.part, mode=Mode.SUBTRACT)


with BuildPart() as body_6_2_1:
    add(body_6_2.part)

    # Cut-Extrude32: cut by cut_extrude32_tool
    add(cut_extrude32_tool.part, mode=Mode.SUBTRACT)


with BuildPart() as body_7_1:
    add(body_7.part)

    # Cut-Extrude32: cut by cut_extrude32_tool
    add(cut_extrude32_tool.part, mode=Mode.SUBTRACT)


with BuildPart() as body_8_1:
    add(body_8.part)

    # Cut-Extrude32: cut by cut_extrude32_tool
    add(cut_extrude32_tool.part, mode=Mode.SUBTRACT)


with BuildPart() as body_9_5:
    add(body_9_4.part)

    # Cut-Extrude32: cut by cut_extrude32_tool
    add(cut_extrude32_tool.part, mode=Mode.SUBTRACT)


with BuildPart() as body_9_4_2:
    add(body_9_4_1.part)

    # Cut-Extrude32: cut by cut_extrude32_tool
    add(cut_extrude32_tool.part, mode=Mode.SUBTRACT)


with BuildPart() as body_10_1:
    add(body_10.part)

    # Cut-Extrude32: cut by cut_extrude32_tool
    add(cut_extrude32_tool.part, mode=Mode.SUBTRACT)


with BuildPart() as body_11_1:
    add(body_11.part)

    # Cut-Extrude32: cut by cut_extrude32_tool
    add(cut_extrude32_tool.part, mode=Mode.SUBTRACT)


solid = Compound([body_5.part, body_6.part, part_2.part])
